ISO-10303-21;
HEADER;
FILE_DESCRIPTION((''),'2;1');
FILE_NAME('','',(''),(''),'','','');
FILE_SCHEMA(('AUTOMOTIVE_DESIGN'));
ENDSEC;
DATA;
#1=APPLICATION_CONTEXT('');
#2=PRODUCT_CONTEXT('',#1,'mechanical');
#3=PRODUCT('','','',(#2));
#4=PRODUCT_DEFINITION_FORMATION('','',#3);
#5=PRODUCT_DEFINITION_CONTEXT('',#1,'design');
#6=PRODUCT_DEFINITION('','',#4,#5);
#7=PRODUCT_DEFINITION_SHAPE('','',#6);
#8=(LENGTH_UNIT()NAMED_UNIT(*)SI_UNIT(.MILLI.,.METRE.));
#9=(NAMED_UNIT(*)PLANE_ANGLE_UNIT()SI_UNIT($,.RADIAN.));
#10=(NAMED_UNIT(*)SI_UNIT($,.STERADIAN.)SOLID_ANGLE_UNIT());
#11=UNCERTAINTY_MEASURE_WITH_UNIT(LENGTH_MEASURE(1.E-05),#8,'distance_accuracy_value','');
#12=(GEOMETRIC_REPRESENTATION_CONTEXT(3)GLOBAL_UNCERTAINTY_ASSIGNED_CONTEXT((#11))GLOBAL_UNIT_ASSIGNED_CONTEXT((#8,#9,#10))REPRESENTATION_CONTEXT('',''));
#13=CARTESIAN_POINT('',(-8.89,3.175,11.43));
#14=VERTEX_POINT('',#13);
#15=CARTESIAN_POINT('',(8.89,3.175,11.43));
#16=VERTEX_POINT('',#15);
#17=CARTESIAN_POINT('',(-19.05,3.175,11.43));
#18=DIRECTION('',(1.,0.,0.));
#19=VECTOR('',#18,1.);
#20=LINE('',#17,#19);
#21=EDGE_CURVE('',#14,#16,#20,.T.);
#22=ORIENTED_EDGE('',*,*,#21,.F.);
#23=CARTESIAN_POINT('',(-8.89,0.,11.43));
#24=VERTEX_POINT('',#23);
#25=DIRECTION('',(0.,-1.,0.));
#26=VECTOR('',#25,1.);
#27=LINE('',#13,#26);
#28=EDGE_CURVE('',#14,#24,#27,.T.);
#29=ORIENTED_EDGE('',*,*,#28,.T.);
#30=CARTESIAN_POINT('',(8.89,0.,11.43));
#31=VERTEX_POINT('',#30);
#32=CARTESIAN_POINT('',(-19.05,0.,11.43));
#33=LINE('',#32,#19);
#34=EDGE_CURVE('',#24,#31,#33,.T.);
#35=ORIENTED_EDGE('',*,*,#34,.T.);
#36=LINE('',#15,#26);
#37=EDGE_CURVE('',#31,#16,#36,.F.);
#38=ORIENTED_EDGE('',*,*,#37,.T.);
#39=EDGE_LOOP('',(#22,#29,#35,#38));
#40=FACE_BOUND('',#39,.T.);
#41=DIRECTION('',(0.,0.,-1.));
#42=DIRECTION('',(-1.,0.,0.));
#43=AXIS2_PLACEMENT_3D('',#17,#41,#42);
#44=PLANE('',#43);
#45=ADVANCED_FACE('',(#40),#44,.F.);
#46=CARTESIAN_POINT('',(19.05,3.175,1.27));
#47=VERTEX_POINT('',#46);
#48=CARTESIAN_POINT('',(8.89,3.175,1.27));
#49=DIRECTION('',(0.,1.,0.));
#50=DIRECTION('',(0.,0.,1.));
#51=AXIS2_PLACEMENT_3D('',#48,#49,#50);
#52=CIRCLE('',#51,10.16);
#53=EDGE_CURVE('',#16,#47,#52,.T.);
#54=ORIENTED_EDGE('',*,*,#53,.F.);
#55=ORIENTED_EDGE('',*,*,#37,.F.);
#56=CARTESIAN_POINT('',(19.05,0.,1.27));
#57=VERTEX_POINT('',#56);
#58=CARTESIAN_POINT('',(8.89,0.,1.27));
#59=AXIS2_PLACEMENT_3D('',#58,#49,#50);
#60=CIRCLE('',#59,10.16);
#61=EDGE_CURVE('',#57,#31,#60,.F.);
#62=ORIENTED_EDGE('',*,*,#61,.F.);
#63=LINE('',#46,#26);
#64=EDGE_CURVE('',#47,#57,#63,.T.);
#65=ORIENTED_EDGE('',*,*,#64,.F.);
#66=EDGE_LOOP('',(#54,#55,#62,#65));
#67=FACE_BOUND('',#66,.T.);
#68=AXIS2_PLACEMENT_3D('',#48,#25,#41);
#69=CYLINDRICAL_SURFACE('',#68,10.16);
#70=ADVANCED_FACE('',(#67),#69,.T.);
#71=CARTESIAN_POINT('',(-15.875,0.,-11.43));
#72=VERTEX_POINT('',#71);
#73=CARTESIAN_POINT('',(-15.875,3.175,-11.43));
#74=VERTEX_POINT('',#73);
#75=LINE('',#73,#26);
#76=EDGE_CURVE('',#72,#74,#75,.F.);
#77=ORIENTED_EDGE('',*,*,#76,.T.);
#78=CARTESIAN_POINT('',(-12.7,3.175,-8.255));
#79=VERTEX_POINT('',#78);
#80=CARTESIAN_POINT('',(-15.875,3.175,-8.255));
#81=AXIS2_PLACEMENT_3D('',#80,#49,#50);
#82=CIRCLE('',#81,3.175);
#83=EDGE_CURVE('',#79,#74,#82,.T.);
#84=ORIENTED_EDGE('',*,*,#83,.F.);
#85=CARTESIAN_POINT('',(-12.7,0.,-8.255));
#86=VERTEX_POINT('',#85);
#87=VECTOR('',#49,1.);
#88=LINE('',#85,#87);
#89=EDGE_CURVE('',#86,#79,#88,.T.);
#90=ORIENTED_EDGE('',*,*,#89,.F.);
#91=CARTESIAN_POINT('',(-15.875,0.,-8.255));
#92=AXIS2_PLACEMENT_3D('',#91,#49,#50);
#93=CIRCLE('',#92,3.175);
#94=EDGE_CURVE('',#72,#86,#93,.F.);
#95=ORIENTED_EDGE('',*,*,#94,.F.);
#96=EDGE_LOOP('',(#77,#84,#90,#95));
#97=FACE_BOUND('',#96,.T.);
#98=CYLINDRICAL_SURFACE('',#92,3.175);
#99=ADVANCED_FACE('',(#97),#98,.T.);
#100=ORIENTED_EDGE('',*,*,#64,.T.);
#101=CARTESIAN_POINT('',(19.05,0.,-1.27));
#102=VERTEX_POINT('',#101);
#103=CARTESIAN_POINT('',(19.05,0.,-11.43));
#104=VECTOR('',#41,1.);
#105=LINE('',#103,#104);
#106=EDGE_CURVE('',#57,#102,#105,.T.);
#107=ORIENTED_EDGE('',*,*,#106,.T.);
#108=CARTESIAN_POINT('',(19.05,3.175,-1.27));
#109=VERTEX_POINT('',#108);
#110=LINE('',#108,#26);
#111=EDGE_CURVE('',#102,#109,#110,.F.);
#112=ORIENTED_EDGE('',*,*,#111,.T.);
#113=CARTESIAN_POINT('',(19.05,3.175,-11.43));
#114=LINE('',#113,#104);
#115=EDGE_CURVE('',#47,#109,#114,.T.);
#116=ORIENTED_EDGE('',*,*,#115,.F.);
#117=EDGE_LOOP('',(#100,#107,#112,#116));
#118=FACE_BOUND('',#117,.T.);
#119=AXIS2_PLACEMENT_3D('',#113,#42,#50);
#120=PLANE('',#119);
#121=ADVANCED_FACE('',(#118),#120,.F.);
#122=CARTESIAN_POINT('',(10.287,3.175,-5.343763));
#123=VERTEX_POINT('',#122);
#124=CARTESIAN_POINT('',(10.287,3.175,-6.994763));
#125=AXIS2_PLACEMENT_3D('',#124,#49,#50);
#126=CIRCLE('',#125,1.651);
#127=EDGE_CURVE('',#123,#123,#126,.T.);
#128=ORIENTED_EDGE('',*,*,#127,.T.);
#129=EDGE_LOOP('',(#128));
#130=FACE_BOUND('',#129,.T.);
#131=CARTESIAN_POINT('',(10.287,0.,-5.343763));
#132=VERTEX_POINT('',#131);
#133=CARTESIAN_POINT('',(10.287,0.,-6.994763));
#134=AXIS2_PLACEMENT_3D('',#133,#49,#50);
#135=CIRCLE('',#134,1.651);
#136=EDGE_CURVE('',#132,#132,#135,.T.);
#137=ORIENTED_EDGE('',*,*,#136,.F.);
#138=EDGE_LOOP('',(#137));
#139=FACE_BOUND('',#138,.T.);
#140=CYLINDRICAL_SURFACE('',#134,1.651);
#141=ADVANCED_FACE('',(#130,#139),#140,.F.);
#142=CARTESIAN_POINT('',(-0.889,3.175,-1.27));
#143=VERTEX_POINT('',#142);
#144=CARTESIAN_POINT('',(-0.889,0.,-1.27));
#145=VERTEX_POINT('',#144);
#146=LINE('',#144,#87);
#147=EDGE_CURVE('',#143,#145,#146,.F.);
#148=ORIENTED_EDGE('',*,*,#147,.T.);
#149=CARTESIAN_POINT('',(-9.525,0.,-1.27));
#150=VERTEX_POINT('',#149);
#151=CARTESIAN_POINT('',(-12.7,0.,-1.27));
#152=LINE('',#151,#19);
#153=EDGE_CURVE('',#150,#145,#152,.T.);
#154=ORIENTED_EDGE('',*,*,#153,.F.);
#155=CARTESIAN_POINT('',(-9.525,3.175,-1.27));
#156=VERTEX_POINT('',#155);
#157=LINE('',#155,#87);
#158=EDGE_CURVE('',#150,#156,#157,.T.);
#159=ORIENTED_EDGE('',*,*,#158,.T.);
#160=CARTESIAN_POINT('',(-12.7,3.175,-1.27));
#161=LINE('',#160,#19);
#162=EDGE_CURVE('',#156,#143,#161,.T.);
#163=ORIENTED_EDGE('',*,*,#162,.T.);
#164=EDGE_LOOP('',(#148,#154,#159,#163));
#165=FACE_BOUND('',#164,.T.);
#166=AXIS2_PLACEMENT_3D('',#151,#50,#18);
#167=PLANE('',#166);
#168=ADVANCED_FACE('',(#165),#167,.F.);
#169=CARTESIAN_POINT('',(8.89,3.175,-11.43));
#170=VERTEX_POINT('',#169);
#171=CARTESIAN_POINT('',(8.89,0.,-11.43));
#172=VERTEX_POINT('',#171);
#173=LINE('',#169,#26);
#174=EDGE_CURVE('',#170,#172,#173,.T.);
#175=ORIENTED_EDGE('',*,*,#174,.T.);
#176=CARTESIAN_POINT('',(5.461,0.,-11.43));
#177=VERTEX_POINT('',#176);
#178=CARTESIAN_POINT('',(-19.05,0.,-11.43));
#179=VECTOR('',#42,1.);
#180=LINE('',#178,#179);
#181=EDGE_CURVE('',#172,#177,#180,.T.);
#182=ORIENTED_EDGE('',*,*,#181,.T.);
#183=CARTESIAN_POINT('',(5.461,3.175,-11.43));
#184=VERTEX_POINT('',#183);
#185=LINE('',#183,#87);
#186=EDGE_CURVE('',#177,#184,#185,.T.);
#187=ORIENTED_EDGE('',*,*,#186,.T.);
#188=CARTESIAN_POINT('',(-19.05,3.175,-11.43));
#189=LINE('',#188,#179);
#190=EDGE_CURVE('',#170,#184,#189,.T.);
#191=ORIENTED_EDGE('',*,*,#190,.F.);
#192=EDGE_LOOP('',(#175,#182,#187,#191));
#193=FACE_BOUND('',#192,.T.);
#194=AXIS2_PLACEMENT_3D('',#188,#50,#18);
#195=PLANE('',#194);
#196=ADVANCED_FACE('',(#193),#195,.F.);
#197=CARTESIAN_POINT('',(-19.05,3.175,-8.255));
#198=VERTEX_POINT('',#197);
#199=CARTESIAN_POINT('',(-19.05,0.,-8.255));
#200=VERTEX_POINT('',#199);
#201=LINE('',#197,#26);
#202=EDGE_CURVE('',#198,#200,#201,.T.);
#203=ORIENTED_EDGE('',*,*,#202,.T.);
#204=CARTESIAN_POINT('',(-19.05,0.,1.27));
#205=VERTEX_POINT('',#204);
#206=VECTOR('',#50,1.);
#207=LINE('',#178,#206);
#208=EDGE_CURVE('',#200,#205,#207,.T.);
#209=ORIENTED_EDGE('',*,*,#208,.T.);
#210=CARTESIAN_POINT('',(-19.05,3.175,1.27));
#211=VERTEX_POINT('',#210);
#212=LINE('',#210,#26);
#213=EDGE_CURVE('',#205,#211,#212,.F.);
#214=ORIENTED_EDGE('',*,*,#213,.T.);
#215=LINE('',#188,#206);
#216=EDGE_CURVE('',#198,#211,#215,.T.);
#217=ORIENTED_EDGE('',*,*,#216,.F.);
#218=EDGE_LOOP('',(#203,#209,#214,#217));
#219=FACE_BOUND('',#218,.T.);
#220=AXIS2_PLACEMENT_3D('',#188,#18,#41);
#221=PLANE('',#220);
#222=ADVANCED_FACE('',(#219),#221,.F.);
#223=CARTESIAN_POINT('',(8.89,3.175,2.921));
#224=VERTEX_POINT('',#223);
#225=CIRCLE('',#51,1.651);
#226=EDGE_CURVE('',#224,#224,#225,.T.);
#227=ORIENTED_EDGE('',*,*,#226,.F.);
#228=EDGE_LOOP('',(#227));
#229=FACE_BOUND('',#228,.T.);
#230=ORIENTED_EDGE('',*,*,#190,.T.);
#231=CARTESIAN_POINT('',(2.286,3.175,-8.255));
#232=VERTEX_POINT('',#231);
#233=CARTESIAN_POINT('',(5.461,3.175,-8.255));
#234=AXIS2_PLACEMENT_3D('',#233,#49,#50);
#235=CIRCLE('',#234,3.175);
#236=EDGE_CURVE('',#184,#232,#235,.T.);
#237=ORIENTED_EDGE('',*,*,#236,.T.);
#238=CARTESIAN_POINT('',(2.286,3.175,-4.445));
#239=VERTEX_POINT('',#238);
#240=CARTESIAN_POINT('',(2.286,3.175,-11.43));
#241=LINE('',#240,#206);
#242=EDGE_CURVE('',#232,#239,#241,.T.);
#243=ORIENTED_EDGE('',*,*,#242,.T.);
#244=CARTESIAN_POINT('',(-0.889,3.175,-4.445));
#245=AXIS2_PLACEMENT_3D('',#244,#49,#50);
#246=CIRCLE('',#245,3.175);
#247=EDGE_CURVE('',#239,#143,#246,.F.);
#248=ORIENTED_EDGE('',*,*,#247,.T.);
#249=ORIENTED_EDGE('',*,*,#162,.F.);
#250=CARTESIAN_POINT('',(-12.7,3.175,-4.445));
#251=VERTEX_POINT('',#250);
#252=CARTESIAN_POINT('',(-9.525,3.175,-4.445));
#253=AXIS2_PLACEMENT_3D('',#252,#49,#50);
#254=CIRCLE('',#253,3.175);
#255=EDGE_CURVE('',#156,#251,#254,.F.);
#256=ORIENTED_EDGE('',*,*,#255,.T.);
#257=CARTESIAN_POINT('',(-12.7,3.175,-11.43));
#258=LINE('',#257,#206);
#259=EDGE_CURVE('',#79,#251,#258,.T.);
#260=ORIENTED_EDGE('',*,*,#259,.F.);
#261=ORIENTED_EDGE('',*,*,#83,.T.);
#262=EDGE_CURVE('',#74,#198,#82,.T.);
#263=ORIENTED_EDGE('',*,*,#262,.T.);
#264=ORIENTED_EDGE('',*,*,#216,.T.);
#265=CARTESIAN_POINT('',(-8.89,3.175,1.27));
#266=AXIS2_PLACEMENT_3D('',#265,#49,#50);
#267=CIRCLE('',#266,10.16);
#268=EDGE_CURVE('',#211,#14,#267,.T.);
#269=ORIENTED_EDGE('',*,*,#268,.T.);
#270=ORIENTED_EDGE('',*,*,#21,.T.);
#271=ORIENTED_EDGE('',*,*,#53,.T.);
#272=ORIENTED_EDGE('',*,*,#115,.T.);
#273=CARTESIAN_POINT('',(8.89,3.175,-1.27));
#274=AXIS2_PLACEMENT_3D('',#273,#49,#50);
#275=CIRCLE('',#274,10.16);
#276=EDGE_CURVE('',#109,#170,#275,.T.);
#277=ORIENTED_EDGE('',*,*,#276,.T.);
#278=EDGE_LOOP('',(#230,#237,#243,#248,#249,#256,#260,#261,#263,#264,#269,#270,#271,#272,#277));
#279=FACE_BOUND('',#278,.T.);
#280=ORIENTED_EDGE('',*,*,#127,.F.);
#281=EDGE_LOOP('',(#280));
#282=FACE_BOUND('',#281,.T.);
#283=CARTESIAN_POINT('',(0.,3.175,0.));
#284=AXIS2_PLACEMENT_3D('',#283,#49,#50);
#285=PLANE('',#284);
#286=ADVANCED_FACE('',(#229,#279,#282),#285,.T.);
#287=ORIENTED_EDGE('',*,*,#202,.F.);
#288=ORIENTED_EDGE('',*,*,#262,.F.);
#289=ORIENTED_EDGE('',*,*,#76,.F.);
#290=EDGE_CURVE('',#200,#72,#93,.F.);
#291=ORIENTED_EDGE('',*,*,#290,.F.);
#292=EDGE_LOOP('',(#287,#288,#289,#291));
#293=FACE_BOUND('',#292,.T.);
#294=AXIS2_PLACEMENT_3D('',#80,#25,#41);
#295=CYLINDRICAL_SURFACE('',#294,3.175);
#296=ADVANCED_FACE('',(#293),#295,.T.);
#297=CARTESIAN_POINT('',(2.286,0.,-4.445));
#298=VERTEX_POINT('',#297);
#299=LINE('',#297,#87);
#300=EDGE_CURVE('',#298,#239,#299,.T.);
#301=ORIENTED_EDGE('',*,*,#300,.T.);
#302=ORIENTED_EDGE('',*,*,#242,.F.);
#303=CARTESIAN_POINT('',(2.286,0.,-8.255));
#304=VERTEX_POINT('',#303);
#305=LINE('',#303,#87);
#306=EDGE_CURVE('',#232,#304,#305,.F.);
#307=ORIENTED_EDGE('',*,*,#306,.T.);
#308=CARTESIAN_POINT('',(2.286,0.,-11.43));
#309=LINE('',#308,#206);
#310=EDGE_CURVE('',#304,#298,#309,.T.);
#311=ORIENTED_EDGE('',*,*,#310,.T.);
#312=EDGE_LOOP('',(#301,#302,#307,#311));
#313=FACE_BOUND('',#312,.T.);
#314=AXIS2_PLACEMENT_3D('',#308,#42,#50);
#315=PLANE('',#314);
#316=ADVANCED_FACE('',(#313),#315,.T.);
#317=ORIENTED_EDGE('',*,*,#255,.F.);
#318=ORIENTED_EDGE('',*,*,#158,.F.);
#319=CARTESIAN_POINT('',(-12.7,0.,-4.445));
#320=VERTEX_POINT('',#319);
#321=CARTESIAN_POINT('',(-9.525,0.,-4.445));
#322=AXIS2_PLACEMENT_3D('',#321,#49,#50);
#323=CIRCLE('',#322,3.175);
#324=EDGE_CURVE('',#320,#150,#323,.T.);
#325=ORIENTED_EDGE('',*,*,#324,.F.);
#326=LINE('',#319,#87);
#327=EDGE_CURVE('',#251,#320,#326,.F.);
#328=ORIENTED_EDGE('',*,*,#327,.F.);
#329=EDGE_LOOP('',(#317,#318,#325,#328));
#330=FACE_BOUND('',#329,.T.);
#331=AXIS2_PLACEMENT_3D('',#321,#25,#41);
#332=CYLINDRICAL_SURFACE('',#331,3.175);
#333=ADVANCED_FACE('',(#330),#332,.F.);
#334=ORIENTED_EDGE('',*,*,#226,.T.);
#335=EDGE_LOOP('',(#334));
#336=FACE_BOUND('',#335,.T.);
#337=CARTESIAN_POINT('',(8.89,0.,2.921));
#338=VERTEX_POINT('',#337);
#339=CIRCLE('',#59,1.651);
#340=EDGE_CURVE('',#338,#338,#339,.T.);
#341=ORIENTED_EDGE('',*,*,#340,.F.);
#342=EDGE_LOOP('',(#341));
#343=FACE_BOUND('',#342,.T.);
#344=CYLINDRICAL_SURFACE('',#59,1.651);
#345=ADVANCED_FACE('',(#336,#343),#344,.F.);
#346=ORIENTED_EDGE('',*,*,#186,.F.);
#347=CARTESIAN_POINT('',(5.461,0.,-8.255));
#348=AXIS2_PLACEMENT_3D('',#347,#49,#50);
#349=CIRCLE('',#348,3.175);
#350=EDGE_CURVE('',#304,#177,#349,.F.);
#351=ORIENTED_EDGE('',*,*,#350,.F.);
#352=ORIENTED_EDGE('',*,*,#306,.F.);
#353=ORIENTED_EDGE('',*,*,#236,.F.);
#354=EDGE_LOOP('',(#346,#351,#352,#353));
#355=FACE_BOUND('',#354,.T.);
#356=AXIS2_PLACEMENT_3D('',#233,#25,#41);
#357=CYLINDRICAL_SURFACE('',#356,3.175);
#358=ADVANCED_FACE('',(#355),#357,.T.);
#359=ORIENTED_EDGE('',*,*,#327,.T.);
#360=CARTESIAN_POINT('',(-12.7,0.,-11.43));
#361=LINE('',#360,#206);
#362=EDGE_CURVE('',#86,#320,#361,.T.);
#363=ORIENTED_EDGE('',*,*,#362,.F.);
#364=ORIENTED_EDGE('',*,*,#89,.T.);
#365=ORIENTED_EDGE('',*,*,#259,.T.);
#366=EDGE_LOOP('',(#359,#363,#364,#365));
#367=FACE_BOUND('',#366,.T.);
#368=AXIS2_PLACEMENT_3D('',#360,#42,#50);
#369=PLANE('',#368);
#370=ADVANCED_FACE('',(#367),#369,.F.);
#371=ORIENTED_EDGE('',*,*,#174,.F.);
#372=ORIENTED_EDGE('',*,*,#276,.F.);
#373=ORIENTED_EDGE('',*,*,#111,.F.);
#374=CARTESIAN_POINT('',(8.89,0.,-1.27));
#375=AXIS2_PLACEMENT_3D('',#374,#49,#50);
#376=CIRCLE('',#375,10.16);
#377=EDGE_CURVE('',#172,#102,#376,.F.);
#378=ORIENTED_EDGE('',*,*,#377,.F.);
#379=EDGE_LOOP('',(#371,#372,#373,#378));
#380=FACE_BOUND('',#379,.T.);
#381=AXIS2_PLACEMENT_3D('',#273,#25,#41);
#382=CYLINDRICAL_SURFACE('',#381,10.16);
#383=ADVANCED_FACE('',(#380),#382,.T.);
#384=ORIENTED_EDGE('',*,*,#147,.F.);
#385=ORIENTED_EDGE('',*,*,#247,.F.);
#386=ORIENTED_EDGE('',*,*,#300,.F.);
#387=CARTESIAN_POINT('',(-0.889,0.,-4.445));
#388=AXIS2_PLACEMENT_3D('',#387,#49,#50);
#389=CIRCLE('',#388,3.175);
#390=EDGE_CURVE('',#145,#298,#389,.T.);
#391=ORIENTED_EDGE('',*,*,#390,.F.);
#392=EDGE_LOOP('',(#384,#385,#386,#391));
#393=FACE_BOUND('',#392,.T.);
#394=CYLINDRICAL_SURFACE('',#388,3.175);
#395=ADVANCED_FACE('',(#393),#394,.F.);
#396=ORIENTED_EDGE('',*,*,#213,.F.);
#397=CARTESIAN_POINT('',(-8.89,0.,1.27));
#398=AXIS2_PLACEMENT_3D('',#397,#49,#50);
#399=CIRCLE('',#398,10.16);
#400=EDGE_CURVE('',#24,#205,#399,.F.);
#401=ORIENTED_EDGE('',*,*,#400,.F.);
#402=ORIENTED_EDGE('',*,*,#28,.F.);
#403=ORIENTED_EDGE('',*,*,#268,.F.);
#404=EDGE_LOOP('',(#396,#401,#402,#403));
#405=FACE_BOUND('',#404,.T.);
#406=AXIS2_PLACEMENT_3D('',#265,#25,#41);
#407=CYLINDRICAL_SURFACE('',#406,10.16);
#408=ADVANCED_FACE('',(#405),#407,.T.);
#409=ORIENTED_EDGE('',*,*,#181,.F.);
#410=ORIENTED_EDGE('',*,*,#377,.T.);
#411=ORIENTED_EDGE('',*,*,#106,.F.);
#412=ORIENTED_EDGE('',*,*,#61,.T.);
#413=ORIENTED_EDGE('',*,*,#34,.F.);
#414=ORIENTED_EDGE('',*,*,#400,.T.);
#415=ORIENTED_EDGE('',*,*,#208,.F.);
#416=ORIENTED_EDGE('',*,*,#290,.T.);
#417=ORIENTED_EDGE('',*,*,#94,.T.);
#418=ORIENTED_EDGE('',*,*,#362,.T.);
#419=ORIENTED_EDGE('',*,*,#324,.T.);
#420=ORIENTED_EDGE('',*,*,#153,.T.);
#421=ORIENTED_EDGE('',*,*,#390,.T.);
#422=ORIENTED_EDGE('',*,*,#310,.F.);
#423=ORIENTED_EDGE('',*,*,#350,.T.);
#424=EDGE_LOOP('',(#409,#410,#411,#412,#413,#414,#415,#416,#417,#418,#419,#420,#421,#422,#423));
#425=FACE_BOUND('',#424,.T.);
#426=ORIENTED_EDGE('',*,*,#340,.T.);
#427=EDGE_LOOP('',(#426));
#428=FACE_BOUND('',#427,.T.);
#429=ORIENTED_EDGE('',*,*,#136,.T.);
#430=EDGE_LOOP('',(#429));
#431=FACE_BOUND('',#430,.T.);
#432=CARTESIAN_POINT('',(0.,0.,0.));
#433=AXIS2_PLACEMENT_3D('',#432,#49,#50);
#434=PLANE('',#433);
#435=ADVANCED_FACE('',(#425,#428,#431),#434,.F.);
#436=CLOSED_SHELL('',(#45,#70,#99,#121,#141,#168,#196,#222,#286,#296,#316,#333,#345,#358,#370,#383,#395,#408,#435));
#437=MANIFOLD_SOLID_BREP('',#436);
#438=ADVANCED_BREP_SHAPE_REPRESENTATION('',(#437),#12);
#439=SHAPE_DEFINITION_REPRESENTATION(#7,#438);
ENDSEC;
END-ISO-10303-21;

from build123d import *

# Parameters (mm, degrees)
SKETCH1_W           = 38.1
SKETCH1_H           = 22.86
BOSS_EXTRUDE1_DEPTH = 3.175
FILLET1_R           = 10.16
SKETCH3_R           = 1.651
CUT_EXTRUDE1_DEPTH  = 23.44165825
FILLET3_R           = 10.16
SKETCH4_W           = 14.986
SKETCH4_H           = 10.16
CUT_EXTRUDE3_DEPTH  = 23.44165825
FILLET8_R           = 3.175


with BuildPart() as part:
    # Sketch1 → Boss-Extrude1 (new body)
    with BuildSketch(Plane(origin=(0, 0, 0), x_dir=(1, 0, 0), z_dir=(0, 1, 0))):
        Rectangle(SKETCH1_W, SKETCH1_H)
    extrude(amount=BOSS_EXTRUDE1_DEPTH)

    # Fillet1
    fillet1_edges = [part.edges().sort_by_distance(p)[0] for p in [
        (19.05, 1.5875, 11.43),
        (-19.05, 1.5875, 11.43),
    ]]
    fillet(fillet1_edges, radius=FILLET1_R)

    # Sketch3 → Cut-Extrude1 (cut, through all)
    with BuildSketch(Plane(origin=(0, 3.175, 0), x_dir=(1, 0, 0), z_dir=(0, 1, 0))):
        with Locations(Location((8.89, -1.27, 0), (0, 0, 270))):
            Circle(SKETCH3_R)
        with Locations(Location((10.287, 6.994763457, 0), (0, 0, 270))):
            Circle(SKETCH3_R)
    extrude(amount=-CUT_EXTRUDE1_DEPTH, mode=Mode.SUBTRACT)

    # Fillet3
    fillet3_edges = [part.edges().sort_by_distance(p)[0] for p in [
        (19.05, 1.5875, -11.43),
    ]]
    fillet(fillet3_edges, radius=FILLET3_R)

    # Sketch4 → Cut-Extrude3 (cut, through all)
    with BuildSketch(Plane(origin=(0, 3.175, 0), x_dir=(1, 0, 0), z_dir=(0, 1, 0))):
        with Locations((-5.207, 6.35)):
            Rectangle(SKETCH4_W, SKETCH4_H)
    extrude(amount=-CUT_EXTRUDE3_DEPTH, mode=Mode.SUBTRACT)

    # Fillet8
    fillet8_edges = [part.edges().sort_by_distance(p)[0] for p in [
        (-12.7, 1.5875, -1.27),
        (-12.7, 1.5875, -11.43),
        (2.286, 1.5875, -11.43),
        (2.286, 1.5875, -1.27),
        (-19.05, 1.5875, -11.43),
    ]]
    fillet(fillet8_edges, radius=FILLET8_R - 0.0001)  # a hair under: the kernel refuses the full size


solid = part.part
